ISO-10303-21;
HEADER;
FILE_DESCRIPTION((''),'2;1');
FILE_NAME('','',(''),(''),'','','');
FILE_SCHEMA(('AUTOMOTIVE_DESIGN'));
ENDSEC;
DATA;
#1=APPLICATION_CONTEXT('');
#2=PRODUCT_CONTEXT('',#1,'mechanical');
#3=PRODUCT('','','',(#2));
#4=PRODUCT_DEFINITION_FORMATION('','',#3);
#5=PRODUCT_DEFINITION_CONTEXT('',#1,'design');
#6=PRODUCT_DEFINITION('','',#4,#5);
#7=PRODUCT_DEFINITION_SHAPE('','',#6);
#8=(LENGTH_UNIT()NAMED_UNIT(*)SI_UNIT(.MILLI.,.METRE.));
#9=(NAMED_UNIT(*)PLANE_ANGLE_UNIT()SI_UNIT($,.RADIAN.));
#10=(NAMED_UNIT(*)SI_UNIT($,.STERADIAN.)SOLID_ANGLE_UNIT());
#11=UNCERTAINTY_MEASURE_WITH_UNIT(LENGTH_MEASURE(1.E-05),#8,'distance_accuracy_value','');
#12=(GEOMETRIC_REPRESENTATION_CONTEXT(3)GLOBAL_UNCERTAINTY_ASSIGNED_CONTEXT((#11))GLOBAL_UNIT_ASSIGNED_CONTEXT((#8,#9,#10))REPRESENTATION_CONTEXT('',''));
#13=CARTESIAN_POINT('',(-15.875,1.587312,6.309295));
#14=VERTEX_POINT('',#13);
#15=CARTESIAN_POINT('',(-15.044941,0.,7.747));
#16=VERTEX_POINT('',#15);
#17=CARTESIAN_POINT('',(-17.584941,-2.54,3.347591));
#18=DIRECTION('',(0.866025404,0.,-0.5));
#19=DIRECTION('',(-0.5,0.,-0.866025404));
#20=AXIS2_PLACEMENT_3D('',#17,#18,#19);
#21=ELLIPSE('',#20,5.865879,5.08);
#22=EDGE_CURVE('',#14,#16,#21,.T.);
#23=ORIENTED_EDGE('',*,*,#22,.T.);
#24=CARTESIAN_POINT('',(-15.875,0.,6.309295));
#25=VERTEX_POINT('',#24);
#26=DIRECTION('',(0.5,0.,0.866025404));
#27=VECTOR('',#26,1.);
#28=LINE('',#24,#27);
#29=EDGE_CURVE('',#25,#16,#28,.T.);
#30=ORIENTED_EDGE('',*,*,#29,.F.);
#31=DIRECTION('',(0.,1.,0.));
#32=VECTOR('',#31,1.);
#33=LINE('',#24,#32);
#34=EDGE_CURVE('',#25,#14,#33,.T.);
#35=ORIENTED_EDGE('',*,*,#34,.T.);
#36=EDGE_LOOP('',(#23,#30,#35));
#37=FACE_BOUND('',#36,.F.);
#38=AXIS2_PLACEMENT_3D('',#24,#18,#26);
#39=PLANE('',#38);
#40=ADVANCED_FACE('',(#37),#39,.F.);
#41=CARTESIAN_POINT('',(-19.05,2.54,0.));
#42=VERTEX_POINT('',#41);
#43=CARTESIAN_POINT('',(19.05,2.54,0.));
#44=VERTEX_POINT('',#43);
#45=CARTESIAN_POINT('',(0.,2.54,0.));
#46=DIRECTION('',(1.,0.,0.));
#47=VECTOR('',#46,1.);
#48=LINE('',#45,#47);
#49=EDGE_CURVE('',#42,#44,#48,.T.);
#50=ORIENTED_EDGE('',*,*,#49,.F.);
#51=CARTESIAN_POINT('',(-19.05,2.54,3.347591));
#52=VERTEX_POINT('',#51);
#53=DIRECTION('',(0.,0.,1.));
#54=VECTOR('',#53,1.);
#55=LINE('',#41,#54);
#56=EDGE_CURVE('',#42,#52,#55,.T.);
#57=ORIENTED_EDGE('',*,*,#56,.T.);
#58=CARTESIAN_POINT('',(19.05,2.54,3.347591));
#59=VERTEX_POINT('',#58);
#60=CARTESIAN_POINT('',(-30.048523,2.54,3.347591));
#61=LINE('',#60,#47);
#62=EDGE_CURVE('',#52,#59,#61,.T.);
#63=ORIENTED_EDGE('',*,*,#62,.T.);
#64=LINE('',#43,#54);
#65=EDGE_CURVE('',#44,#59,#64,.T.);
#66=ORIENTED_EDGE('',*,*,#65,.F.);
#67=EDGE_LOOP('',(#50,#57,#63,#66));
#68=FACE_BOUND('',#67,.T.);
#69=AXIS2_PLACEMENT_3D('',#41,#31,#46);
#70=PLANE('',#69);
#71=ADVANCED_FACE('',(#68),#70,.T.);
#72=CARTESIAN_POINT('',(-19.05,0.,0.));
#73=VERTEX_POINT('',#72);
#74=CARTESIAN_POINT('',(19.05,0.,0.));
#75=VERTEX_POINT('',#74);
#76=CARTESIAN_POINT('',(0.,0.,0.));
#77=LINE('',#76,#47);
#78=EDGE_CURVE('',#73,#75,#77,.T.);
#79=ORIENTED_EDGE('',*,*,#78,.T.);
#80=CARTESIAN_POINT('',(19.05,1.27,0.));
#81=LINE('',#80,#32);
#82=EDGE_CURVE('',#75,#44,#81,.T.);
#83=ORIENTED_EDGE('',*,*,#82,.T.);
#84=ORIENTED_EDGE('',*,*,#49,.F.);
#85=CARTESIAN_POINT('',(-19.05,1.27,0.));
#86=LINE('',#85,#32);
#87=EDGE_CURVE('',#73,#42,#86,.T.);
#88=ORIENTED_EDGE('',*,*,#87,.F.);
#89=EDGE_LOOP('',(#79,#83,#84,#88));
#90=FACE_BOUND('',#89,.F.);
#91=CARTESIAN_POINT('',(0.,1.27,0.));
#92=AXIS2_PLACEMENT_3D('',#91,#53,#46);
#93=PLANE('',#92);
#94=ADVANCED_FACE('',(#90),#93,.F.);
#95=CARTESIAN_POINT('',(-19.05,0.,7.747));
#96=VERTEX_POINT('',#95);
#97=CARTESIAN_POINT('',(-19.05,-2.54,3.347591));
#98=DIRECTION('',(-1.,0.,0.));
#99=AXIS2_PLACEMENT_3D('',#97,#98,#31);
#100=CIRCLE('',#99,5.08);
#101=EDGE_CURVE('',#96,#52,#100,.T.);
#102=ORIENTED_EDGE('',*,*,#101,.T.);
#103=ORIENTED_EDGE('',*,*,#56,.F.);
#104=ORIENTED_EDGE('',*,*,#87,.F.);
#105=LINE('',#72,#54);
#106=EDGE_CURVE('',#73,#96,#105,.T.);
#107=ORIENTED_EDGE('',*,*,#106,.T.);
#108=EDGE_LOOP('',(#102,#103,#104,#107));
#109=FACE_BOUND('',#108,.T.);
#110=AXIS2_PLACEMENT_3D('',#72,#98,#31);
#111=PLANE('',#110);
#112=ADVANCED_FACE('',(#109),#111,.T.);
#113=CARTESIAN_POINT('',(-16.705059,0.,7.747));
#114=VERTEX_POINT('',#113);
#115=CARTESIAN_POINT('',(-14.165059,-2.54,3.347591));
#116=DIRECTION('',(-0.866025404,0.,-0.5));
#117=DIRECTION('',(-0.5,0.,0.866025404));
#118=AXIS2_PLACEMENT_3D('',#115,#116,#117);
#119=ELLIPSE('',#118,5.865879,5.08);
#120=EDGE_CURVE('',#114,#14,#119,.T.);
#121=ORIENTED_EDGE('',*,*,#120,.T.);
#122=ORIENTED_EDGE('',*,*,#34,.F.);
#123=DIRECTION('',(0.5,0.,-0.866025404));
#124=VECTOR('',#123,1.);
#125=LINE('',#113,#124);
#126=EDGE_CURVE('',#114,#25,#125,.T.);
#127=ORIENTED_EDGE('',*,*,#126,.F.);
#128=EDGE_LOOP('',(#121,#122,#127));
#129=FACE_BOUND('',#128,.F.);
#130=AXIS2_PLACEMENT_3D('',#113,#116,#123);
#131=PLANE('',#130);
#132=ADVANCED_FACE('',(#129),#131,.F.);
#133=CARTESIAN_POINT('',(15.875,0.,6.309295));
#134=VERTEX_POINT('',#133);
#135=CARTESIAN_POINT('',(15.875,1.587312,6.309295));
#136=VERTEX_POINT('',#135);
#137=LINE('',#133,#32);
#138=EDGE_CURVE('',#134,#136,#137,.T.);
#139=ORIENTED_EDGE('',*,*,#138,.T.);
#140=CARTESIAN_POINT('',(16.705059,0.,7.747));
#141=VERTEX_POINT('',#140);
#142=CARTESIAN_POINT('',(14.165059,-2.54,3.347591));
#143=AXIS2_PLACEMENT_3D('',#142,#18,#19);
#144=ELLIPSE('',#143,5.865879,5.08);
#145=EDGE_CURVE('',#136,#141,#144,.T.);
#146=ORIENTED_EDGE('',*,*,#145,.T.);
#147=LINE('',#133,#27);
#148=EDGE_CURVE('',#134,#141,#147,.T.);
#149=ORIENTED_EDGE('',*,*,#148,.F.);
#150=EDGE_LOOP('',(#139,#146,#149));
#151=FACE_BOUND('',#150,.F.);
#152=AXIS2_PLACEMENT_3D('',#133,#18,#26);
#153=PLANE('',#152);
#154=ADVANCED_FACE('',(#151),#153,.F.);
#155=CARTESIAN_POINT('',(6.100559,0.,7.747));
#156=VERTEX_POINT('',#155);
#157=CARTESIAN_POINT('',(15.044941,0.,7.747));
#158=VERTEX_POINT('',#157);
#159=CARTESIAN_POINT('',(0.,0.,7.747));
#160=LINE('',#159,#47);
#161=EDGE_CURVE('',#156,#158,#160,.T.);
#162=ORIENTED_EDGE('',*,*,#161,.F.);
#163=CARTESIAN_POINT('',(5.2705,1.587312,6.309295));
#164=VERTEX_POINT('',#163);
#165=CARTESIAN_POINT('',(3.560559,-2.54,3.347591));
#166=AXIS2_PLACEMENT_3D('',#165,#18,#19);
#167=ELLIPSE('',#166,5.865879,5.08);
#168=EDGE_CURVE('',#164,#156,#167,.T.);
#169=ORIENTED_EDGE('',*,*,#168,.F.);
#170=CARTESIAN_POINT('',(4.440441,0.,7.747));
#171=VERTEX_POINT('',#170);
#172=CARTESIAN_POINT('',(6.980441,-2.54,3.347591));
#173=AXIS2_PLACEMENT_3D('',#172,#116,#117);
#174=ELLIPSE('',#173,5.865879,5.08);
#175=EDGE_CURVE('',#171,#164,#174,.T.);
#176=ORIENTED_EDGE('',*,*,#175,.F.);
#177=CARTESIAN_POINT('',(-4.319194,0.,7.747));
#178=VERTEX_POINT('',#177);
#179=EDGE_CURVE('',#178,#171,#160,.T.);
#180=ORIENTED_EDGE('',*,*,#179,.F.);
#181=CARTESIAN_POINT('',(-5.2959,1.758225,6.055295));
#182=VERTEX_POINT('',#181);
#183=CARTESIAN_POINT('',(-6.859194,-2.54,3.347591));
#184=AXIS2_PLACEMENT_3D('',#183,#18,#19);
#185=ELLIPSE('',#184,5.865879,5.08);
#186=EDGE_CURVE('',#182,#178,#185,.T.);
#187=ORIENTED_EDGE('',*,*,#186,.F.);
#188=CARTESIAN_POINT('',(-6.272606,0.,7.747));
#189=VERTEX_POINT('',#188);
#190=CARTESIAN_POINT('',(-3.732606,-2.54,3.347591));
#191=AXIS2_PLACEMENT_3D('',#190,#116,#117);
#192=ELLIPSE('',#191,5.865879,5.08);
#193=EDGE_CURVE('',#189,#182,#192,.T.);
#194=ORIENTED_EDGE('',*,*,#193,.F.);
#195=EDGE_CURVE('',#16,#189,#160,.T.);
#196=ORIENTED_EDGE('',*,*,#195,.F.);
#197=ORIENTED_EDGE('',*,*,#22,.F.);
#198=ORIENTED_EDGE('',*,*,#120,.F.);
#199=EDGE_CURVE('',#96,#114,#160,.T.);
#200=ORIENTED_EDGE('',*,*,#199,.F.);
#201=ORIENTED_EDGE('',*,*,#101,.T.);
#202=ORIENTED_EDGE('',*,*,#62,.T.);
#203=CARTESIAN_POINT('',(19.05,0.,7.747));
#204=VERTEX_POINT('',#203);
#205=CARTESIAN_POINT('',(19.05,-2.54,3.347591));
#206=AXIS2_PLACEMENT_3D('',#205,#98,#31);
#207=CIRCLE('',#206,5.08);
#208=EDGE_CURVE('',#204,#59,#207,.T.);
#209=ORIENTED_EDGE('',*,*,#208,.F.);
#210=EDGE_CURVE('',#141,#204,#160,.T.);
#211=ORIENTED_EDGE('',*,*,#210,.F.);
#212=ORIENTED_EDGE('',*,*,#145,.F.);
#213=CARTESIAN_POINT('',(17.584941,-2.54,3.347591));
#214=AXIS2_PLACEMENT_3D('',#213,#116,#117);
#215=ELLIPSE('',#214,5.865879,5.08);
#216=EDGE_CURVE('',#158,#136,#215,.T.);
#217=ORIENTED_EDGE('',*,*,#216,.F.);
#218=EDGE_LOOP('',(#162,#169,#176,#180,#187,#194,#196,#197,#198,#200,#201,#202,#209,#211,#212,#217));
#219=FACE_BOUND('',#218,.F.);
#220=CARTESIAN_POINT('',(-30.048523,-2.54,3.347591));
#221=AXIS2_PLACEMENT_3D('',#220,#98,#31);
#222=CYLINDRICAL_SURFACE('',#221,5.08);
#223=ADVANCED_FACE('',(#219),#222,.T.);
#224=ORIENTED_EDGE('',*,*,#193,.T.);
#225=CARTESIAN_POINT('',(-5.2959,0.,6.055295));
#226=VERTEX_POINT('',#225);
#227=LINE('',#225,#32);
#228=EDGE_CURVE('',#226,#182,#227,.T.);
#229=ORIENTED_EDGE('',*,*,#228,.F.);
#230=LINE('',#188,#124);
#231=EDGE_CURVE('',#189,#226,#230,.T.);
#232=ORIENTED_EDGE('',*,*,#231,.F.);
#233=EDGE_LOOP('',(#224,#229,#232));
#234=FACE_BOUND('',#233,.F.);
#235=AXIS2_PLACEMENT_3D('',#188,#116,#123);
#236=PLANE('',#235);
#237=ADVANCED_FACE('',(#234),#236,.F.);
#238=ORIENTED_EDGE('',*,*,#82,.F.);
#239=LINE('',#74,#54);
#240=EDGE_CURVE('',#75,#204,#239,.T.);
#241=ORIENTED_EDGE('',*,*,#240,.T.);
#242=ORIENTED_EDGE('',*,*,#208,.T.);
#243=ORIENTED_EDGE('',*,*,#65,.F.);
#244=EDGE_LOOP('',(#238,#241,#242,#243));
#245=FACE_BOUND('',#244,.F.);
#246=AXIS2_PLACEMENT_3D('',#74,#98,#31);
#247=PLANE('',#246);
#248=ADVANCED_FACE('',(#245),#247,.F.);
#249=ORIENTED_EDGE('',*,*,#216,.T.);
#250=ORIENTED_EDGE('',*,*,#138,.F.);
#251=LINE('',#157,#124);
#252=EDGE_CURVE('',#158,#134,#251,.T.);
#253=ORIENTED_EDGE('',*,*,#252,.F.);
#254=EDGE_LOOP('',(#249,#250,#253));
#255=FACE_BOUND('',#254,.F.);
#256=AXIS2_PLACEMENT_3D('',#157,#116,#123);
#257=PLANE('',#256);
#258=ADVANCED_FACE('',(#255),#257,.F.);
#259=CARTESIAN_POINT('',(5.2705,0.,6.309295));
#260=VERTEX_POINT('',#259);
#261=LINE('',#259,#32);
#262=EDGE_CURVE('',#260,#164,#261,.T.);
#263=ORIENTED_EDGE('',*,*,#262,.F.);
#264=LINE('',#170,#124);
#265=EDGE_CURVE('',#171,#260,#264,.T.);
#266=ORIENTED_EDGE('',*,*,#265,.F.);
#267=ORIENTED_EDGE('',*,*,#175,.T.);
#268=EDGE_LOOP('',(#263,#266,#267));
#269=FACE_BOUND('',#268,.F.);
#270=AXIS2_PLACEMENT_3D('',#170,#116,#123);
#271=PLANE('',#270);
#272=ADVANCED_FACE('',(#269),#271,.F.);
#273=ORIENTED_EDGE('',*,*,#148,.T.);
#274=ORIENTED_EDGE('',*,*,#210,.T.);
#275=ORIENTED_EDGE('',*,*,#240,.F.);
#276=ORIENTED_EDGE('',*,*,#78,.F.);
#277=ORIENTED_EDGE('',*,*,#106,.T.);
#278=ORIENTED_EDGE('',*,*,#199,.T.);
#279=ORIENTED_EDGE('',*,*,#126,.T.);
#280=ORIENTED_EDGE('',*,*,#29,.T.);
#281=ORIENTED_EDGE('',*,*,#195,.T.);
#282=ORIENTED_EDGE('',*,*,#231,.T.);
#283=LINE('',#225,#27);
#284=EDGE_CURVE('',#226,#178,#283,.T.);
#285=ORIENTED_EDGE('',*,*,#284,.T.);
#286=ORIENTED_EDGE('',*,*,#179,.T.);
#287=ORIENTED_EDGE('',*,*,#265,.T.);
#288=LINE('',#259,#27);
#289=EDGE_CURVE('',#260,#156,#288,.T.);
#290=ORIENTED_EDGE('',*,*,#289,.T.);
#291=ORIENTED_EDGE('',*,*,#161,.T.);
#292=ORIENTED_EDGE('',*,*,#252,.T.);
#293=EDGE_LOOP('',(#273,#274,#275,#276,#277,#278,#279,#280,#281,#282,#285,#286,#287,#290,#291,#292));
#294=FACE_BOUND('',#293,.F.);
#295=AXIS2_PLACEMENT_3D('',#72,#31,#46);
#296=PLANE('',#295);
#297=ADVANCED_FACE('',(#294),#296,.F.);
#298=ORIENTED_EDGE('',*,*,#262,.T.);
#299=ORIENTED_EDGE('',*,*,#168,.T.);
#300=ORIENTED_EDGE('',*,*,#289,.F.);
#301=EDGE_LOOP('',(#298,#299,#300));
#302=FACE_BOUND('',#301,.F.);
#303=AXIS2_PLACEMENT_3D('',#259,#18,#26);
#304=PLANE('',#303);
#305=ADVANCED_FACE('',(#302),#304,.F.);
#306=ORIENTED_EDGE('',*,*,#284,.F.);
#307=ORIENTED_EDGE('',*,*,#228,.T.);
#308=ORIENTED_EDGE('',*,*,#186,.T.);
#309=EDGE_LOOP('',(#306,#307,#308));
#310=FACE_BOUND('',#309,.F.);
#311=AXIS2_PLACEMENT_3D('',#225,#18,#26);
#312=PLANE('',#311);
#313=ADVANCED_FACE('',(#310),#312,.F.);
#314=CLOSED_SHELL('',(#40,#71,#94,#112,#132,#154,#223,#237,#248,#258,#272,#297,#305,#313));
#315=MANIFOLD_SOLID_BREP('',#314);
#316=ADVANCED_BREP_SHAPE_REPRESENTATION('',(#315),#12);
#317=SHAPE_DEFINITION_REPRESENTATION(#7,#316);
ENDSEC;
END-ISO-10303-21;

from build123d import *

# Parameters (mm, degrees)
F0_W        = 38.1
F0_H        = 2.54
F1_DEPTH    = 7.747
F3_T1_DEPTH = 60.0970452561
F4_DEPTH    = 25.4


# Not quite as in the source:
# - a fillet or chamfer that OpenCascade refuses, or shapes differently, is made with other operations: its cross-section is extruded or revolved along the edge and cut away or added


with BuildPart() as f1:
    # F0 (on Top) → F1 (new body)
    with BuildSketch(Plane.XY):
        with Locations((0, 1.27)):
            Rectangle(F0_W, F0_H)
    extrude(amount=F1_DEPTH)

    # F3: fillet of radius 5.08 on 1 edges, made by hand

    # F3_s2 → F3_t1 (cut)
    with BuildSketch(Plane.YZ.offset(-30.0485226281)):
        with BuildLine():
            ThreePointArc((2.54, 3.3475909488), (1.8594090512, 5.8875909488), (0, 7.747))
            Line((0, 7.747), (2.54, 7.747))
            Line((2.54, 7.747), (2.54, 3.3475909488))
        make_face()
    extrude(amount=F3_T1_DEPTH, mode=Mode.SUBTRACT)

    # F2 (on face) → F4 (cut)
    with BuildSketch(Plane.XZ):
        Polygon((-15.875, 6.3092954744), (-15.0449409051, 7.747), (-16.7050590949, 7.747), align=None)
        Polygon((-4.3191939367, 7.747), (-6.2726060633, 7.747), (-5.2959, 6.0552954744), align=None)
        Polygon((6.1005590949, 7.747), (4.4404409051, 7.747), (5.2705, 6.3092954744), align=None)
        Polygon((16.7050590949, 7.747), (15.0449409051, 7.747), (15.875, 6.3092954744), align=None)
    extrude(amount=-F4_DEPTH, mode=Mode.SUBTRACT)


solid = f1.part
